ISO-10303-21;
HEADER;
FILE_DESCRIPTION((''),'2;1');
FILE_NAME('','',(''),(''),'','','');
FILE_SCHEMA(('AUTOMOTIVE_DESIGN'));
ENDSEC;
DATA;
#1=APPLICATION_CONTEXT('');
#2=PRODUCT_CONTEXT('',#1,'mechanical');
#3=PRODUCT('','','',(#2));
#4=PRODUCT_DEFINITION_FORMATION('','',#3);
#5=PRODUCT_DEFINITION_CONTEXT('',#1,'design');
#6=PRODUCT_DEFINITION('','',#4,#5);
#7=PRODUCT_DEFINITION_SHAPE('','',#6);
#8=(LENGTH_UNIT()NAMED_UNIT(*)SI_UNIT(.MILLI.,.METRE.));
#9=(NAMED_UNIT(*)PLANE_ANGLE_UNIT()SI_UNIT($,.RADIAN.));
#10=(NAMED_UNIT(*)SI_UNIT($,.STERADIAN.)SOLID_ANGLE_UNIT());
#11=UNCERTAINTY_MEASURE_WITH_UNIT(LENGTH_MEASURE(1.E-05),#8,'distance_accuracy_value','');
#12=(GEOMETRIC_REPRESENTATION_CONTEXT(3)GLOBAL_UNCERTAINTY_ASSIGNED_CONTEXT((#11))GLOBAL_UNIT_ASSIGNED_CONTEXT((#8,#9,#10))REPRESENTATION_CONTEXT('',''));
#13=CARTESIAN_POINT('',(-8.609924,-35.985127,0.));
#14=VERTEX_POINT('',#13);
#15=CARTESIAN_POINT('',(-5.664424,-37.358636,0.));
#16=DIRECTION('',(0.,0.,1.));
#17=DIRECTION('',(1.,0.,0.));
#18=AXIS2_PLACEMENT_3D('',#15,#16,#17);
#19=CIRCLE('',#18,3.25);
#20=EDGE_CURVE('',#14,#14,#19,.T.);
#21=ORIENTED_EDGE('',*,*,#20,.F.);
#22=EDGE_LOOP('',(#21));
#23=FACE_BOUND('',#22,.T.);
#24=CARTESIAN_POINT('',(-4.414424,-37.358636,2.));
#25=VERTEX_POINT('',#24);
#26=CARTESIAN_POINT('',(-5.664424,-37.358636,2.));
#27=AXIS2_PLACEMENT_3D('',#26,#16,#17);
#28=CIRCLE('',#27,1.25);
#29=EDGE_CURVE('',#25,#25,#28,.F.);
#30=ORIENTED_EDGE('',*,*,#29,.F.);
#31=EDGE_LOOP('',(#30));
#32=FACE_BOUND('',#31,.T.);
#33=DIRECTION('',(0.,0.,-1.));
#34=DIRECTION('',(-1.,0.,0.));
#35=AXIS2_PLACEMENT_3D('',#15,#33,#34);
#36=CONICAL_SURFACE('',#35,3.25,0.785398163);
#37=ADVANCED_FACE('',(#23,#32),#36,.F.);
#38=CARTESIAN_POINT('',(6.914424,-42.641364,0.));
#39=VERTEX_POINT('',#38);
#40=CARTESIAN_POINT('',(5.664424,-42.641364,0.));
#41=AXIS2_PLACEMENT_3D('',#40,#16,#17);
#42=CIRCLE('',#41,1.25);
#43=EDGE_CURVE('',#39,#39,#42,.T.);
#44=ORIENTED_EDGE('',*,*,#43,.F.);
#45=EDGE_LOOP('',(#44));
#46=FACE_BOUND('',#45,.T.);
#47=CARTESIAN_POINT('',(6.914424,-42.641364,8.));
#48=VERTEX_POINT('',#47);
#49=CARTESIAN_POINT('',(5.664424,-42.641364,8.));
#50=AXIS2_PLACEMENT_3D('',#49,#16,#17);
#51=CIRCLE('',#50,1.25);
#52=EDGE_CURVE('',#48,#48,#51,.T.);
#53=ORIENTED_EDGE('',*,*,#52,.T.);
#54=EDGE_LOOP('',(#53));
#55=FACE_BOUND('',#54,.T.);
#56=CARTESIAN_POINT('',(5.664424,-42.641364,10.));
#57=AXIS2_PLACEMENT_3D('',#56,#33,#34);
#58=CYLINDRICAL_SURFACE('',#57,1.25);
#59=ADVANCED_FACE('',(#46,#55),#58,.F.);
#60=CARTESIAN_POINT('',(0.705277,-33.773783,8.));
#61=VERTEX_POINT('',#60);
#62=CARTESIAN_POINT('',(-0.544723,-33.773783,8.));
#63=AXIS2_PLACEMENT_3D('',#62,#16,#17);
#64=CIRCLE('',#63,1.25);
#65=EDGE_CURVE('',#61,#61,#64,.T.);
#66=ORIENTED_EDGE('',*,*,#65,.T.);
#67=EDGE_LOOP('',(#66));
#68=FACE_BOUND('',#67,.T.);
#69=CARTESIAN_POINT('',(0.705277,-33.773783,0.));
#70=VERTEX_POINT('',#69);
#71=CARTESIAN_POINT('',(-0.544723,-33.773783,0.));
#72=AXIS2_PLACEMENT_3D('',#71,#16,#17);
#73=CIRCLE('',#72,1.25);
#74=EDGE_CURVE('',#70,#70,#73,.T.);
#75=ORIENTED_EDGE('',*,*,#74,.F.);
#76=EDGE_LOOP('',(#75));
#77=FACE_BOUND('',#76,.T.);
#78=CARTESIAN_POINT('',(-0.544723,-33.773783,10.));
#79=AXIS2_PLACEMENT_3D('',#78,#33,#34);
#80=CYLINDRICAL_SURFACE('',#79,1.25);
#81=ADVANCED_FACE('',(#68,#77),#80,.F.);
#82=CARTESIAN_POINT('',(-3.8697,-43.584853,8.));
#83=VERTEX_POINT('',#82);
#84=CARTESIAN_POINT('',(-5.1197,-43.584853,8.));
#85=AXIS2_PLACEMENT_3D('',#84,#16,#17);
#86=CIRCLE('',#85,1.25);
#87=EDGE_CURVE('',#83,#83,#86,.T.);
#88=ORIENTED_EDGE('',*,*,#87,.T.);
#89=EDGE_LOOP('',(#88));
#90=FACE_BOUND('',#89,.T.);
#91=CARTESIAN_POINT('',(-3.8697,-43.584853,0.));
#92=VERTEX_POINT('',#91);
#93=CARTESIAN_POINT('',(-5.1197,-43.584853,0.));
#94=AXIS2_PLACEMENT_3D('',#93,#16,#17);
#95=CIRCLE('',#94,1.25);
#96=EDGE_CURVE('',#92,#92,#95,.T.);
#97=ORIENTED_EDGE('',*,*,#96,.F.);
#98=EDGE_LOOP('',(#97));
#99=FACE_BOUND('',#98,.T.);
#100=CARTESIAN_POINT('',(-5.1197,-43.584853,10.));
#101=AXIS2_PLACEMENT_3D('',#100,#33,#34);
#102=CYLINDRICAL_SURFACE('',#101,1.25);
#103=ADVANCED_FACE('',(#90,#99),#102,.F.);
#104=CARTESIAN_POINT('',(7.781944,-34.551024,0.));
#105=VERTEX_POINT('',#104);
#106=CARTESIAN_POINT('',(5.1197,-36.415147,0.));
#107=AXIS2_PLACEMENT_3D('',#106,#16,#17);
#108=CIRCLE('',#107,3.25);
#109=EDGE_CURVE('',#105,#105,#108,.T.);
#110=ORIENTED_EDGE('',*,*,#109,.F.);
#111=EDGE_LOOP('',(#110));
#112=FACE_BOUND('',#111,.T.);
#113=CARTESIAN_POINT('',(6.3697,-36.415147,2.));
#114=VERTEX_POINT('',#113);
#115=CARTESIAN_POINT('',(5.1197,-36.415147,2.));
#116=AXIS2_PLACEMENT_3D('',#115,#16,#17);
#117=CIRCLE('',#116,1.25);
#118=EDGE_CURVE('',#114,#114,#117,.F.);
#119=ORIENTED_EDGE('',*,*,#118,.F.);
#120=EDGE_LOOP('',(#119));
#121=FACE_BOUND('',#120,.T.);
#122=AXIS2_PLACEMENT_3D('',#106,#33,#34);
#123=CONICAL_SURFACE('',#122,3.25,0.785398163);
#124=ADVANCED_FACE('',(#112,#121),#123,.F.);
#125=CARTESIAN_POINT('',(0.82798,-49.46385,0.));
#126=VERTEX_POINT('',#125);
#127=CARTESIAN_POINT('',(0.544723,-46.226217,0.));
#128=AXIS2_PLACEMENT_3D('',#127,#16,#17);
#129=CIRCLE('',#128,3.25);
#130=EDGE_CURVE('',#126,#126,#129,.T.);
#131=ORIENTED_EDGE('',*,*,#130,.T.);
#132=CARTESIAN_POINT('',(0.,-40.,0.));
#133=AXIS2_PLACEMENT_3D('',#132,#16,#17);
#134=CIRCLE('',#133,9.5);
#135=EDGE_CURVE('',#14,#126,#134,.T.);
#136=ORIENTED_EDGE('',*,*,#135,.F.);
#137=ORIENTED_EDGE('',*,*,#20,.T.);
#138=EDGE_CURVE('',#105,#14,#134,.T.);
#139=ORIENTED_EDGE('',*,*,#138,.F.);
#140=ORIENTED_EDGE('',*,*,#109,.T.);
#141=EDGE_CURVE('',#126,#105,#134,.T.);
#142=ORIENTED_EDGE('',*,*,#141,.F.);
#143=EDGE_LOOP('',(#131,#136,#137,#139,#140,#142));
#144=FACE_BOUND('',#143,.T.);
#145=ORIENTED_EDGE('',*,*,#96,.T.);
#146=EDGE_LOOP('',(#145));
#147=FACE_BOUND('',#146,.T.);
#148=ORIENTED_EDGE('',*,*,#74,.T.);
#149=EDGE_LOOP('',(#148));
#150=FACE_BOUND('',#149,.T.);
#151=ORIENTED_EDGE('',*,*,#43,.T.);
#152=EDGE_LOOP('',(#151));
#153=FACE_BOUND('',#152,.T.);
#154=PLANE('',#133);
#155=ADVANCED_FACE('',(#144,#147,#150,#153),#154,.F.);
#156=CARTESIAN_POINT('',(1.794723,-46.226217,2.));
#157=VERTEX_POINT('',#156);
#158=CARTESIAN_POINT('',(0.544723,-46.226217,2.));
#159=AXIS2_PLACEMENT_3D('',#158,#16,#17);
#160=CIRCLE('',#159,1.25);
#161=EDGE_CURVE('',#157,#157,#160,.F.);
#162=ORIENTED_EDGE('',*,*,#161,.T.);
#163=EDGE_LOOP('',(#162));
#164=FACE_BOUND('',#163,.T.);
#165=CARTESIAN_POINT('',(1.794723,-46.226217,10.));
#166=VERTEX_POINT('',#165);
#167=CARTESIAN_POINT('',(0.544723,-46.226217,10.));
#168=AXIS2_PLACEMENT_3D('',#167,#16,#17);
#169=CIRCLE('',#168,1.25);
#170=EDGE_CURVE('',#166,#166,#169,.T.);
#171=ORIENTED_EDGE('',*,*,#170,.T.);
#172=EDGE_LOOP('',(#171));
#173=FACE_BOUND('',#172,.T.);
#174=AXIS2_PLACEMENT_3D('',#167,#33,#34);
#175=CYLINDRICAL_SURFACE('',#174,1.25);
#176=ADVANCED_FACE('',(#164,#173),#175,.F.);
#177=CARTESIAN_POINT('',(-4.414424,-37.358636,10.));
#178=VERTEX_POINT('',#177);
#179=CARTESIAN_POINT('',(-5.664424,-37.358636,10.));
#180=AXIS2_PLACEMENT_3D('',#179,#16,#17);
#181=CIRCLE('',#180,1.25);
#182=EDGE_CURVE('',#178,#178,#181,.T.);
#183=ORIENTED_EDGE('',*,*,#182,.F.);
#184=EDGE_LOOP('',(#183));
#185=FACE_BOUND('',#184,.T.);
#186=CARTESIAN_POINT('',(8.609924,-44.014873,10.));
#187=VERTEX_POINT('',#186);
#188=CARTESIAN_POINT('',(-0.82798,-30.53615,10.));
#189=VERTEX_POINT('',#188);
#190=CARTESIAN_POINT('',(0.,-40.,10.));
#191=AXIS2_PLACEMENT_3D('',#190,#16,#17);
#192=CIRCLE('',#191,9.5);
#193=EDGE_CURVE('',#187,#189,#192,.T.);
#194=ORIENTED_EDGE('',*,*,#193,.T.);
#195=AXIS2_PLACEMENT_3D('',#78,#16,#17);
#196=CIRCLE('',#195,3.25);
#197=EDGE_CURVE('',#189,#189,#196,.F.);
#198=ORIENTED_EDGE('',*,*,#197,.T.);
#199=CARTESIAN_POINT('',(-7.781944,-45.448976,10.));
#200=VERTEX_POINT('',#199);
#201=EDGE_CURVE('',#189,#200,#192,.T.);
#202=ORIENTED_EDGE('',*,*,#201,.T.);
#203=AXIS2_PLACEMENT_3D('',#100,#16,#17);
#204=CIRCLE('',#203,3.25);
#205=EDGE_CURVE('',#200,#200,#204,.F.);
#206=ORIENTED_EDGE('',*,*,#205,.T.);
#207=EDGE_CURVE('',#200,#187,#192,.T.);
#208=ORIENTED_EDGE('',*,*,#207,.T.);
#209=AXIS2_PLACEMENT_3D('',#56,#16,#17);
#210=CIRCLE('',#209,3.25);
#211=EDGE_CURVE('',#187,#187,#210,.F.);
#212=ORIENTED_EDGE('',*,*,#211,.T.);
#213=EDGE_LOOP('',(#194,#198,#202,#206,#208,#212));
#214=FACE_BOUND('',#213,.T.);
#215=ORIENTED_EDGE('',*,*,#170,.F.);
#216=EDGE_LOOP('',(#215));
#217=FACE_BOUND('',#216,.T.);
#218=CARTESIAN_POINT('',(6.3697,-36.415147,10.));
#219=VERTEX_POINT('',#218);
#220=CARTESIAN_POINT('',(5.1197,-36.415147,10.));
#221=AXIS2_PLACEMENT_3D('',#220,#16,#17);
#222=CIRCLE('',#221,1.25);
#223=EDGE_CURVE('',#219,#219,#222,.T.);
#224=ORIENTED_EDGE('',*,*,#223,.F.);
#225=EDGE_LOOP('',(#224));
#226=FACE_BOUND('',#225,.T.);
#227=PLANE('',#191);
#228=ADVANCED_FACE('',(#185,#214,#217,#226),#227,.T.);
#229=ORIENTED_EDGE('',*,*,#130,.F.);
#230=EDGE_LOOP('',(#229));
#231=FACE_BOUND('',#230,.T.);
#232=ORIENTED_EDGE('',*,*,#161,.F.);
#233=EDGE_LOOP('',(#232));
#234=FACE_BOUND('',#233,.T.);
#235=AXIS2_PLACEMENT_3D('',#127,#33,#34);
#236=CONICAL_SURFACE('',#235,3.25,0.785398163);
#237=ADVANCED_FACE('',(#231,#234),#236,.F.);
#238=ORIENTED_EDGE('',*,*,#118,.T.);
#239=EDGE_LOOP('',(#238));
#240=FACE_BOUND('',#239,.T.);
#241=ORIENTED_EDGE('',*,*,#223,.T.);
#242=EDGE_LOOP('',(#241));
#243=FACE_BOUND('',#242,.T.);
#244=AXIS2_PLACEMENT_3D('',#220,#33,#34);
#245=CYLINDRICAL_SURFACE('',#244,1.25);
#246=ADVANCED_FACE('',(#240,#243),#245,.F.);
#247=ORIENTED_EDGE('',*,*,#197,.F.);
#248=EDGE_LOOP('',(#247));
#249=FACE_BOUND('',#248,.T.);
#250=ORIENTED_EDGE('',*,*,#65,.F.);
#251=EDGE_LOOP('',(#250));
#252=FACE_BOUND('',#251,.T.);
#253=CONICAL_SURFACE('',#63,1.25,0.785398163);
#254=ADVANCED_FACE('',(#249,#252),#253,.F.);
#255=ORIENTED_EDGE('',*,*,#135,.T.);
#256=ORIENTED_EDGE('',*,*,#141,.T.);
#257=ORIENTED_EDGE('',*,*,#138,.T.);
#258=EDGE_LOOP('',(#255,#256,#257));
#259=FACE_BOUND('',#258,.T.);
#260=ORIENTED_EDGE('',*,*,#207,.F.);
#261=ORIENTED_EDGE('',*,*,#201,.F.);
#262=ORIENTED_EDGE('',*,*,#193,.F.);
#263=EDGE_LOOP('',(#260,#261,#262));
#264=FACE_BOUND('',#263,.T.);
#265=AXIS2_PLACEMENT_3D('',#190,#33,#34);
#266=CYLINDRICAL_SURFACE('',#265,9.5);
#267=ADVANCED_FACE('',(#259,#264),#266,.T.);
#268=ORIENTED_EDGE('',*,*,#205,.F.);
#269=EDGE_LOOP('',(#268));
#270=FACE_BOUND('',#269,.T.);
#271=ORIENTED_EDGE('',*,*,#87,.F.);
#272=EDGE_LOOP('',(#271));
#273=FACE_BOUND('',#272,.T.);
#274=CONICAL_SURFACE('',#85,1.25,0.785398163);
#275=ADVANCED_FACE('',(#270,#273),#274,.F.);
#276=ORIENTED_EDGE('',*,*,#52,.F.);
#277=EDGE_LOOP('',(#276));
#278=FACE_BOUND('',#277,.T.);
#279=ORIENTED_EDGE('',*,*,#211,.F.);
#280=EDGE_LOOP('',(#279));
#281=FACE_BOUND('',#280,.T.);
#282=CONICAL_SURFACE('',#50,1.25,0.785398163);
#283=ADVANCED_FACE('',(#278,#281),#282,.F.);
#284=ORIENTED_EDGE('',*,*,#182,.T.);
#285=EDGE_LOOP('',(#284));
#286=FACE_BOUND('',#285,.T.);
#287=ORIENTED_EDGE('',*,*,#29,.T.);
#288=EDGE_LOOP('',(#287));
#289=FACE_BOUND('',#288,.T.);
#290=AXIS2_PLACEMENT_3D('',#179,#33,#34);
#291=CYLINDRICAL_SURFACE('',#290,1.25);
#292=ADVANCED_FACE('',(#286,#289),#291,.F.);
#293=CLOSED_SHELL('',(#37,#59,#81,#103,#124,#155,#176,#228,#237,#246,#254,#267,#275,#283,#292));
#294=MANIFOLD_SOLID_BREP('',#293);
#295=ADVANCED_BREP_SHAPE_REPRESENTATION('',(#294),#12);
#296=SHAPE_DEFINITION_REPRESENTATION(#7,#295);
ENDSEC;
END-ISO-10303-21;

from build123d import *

# Parameters (mm, degrees)
SKETCH1_R           = 9.5
SKETCH1_R_2         = 1.25
BOSS_EXTRUDE1_DEPTH = 10
CHAMFER1_SIZE       = 2
CHAMFER2_SIZE       = 2


with BuildPart() as part:
    # Sketch1 → Boss-Extrude1 (new body)
    with BuildSketch(Plane.XY):
        with Locations((0, -40)):
            Circle(SKETCH1_R)
        with Locations((5.119700277, -36.415147273)):
            Circle(SKETCH1_R_2, mode=Mode.SUBTRACT)
        with Locations((0.544723392, -46.226216863)):
            Circle(SKETCH1_R_2, mode=Mode.SUBTRACT)
        with Locations((-5.664423669, -37.358635864)):
            Circle(SKETCH1_R_2, mode=Mode.SUBTRACT)
        with Locations((-5.119700277, -43.584852727)):
            Circle(SKETCH1_R_2, mode=Mode.SUBTRACT)
        with Locations((-0.544723392, -33.773783137)):
            Circle(SKETCH1_R_2, mode=Mode.SUBTRACT)
        with Locations((5.664423669, -42.641364136)):
            Circle(SKETCH1_R_2, mode=Mode.SUBTRACT)
    extrude(amount=BOSS_EXTRUDE1_DEPTH)

    # Chamfer1
    chamfer1_edges = [part.edges().sort_by_distance(p)[0] for p in [
        (-6.369700277, -43.584852727, 10),
        (-1.794723392, -33.773783137, 10),
        (4.414423669, -42.641364136, 10),
    ]]
    chamfer(chamfer1_edges, length=CHAMFER1_SIZE - 0.0001)  # a hair under: the kernel refuses the full size

    # Chamfer2
    chamfer2_edges = [part.edges().sort_by_distance(p)[0] for p in [
        (-6.914423669, -37.358635864, 0),
        (3.869700277, -36.415147273, 0),
        (-0.705276608, -46.226216863, 0),
    ]]
    chamfer(chamfer2_edges, length=CHAMFER2_SIZE - 0.0001)  # a hair under: the kernel refuses the full size


solid = part.part
